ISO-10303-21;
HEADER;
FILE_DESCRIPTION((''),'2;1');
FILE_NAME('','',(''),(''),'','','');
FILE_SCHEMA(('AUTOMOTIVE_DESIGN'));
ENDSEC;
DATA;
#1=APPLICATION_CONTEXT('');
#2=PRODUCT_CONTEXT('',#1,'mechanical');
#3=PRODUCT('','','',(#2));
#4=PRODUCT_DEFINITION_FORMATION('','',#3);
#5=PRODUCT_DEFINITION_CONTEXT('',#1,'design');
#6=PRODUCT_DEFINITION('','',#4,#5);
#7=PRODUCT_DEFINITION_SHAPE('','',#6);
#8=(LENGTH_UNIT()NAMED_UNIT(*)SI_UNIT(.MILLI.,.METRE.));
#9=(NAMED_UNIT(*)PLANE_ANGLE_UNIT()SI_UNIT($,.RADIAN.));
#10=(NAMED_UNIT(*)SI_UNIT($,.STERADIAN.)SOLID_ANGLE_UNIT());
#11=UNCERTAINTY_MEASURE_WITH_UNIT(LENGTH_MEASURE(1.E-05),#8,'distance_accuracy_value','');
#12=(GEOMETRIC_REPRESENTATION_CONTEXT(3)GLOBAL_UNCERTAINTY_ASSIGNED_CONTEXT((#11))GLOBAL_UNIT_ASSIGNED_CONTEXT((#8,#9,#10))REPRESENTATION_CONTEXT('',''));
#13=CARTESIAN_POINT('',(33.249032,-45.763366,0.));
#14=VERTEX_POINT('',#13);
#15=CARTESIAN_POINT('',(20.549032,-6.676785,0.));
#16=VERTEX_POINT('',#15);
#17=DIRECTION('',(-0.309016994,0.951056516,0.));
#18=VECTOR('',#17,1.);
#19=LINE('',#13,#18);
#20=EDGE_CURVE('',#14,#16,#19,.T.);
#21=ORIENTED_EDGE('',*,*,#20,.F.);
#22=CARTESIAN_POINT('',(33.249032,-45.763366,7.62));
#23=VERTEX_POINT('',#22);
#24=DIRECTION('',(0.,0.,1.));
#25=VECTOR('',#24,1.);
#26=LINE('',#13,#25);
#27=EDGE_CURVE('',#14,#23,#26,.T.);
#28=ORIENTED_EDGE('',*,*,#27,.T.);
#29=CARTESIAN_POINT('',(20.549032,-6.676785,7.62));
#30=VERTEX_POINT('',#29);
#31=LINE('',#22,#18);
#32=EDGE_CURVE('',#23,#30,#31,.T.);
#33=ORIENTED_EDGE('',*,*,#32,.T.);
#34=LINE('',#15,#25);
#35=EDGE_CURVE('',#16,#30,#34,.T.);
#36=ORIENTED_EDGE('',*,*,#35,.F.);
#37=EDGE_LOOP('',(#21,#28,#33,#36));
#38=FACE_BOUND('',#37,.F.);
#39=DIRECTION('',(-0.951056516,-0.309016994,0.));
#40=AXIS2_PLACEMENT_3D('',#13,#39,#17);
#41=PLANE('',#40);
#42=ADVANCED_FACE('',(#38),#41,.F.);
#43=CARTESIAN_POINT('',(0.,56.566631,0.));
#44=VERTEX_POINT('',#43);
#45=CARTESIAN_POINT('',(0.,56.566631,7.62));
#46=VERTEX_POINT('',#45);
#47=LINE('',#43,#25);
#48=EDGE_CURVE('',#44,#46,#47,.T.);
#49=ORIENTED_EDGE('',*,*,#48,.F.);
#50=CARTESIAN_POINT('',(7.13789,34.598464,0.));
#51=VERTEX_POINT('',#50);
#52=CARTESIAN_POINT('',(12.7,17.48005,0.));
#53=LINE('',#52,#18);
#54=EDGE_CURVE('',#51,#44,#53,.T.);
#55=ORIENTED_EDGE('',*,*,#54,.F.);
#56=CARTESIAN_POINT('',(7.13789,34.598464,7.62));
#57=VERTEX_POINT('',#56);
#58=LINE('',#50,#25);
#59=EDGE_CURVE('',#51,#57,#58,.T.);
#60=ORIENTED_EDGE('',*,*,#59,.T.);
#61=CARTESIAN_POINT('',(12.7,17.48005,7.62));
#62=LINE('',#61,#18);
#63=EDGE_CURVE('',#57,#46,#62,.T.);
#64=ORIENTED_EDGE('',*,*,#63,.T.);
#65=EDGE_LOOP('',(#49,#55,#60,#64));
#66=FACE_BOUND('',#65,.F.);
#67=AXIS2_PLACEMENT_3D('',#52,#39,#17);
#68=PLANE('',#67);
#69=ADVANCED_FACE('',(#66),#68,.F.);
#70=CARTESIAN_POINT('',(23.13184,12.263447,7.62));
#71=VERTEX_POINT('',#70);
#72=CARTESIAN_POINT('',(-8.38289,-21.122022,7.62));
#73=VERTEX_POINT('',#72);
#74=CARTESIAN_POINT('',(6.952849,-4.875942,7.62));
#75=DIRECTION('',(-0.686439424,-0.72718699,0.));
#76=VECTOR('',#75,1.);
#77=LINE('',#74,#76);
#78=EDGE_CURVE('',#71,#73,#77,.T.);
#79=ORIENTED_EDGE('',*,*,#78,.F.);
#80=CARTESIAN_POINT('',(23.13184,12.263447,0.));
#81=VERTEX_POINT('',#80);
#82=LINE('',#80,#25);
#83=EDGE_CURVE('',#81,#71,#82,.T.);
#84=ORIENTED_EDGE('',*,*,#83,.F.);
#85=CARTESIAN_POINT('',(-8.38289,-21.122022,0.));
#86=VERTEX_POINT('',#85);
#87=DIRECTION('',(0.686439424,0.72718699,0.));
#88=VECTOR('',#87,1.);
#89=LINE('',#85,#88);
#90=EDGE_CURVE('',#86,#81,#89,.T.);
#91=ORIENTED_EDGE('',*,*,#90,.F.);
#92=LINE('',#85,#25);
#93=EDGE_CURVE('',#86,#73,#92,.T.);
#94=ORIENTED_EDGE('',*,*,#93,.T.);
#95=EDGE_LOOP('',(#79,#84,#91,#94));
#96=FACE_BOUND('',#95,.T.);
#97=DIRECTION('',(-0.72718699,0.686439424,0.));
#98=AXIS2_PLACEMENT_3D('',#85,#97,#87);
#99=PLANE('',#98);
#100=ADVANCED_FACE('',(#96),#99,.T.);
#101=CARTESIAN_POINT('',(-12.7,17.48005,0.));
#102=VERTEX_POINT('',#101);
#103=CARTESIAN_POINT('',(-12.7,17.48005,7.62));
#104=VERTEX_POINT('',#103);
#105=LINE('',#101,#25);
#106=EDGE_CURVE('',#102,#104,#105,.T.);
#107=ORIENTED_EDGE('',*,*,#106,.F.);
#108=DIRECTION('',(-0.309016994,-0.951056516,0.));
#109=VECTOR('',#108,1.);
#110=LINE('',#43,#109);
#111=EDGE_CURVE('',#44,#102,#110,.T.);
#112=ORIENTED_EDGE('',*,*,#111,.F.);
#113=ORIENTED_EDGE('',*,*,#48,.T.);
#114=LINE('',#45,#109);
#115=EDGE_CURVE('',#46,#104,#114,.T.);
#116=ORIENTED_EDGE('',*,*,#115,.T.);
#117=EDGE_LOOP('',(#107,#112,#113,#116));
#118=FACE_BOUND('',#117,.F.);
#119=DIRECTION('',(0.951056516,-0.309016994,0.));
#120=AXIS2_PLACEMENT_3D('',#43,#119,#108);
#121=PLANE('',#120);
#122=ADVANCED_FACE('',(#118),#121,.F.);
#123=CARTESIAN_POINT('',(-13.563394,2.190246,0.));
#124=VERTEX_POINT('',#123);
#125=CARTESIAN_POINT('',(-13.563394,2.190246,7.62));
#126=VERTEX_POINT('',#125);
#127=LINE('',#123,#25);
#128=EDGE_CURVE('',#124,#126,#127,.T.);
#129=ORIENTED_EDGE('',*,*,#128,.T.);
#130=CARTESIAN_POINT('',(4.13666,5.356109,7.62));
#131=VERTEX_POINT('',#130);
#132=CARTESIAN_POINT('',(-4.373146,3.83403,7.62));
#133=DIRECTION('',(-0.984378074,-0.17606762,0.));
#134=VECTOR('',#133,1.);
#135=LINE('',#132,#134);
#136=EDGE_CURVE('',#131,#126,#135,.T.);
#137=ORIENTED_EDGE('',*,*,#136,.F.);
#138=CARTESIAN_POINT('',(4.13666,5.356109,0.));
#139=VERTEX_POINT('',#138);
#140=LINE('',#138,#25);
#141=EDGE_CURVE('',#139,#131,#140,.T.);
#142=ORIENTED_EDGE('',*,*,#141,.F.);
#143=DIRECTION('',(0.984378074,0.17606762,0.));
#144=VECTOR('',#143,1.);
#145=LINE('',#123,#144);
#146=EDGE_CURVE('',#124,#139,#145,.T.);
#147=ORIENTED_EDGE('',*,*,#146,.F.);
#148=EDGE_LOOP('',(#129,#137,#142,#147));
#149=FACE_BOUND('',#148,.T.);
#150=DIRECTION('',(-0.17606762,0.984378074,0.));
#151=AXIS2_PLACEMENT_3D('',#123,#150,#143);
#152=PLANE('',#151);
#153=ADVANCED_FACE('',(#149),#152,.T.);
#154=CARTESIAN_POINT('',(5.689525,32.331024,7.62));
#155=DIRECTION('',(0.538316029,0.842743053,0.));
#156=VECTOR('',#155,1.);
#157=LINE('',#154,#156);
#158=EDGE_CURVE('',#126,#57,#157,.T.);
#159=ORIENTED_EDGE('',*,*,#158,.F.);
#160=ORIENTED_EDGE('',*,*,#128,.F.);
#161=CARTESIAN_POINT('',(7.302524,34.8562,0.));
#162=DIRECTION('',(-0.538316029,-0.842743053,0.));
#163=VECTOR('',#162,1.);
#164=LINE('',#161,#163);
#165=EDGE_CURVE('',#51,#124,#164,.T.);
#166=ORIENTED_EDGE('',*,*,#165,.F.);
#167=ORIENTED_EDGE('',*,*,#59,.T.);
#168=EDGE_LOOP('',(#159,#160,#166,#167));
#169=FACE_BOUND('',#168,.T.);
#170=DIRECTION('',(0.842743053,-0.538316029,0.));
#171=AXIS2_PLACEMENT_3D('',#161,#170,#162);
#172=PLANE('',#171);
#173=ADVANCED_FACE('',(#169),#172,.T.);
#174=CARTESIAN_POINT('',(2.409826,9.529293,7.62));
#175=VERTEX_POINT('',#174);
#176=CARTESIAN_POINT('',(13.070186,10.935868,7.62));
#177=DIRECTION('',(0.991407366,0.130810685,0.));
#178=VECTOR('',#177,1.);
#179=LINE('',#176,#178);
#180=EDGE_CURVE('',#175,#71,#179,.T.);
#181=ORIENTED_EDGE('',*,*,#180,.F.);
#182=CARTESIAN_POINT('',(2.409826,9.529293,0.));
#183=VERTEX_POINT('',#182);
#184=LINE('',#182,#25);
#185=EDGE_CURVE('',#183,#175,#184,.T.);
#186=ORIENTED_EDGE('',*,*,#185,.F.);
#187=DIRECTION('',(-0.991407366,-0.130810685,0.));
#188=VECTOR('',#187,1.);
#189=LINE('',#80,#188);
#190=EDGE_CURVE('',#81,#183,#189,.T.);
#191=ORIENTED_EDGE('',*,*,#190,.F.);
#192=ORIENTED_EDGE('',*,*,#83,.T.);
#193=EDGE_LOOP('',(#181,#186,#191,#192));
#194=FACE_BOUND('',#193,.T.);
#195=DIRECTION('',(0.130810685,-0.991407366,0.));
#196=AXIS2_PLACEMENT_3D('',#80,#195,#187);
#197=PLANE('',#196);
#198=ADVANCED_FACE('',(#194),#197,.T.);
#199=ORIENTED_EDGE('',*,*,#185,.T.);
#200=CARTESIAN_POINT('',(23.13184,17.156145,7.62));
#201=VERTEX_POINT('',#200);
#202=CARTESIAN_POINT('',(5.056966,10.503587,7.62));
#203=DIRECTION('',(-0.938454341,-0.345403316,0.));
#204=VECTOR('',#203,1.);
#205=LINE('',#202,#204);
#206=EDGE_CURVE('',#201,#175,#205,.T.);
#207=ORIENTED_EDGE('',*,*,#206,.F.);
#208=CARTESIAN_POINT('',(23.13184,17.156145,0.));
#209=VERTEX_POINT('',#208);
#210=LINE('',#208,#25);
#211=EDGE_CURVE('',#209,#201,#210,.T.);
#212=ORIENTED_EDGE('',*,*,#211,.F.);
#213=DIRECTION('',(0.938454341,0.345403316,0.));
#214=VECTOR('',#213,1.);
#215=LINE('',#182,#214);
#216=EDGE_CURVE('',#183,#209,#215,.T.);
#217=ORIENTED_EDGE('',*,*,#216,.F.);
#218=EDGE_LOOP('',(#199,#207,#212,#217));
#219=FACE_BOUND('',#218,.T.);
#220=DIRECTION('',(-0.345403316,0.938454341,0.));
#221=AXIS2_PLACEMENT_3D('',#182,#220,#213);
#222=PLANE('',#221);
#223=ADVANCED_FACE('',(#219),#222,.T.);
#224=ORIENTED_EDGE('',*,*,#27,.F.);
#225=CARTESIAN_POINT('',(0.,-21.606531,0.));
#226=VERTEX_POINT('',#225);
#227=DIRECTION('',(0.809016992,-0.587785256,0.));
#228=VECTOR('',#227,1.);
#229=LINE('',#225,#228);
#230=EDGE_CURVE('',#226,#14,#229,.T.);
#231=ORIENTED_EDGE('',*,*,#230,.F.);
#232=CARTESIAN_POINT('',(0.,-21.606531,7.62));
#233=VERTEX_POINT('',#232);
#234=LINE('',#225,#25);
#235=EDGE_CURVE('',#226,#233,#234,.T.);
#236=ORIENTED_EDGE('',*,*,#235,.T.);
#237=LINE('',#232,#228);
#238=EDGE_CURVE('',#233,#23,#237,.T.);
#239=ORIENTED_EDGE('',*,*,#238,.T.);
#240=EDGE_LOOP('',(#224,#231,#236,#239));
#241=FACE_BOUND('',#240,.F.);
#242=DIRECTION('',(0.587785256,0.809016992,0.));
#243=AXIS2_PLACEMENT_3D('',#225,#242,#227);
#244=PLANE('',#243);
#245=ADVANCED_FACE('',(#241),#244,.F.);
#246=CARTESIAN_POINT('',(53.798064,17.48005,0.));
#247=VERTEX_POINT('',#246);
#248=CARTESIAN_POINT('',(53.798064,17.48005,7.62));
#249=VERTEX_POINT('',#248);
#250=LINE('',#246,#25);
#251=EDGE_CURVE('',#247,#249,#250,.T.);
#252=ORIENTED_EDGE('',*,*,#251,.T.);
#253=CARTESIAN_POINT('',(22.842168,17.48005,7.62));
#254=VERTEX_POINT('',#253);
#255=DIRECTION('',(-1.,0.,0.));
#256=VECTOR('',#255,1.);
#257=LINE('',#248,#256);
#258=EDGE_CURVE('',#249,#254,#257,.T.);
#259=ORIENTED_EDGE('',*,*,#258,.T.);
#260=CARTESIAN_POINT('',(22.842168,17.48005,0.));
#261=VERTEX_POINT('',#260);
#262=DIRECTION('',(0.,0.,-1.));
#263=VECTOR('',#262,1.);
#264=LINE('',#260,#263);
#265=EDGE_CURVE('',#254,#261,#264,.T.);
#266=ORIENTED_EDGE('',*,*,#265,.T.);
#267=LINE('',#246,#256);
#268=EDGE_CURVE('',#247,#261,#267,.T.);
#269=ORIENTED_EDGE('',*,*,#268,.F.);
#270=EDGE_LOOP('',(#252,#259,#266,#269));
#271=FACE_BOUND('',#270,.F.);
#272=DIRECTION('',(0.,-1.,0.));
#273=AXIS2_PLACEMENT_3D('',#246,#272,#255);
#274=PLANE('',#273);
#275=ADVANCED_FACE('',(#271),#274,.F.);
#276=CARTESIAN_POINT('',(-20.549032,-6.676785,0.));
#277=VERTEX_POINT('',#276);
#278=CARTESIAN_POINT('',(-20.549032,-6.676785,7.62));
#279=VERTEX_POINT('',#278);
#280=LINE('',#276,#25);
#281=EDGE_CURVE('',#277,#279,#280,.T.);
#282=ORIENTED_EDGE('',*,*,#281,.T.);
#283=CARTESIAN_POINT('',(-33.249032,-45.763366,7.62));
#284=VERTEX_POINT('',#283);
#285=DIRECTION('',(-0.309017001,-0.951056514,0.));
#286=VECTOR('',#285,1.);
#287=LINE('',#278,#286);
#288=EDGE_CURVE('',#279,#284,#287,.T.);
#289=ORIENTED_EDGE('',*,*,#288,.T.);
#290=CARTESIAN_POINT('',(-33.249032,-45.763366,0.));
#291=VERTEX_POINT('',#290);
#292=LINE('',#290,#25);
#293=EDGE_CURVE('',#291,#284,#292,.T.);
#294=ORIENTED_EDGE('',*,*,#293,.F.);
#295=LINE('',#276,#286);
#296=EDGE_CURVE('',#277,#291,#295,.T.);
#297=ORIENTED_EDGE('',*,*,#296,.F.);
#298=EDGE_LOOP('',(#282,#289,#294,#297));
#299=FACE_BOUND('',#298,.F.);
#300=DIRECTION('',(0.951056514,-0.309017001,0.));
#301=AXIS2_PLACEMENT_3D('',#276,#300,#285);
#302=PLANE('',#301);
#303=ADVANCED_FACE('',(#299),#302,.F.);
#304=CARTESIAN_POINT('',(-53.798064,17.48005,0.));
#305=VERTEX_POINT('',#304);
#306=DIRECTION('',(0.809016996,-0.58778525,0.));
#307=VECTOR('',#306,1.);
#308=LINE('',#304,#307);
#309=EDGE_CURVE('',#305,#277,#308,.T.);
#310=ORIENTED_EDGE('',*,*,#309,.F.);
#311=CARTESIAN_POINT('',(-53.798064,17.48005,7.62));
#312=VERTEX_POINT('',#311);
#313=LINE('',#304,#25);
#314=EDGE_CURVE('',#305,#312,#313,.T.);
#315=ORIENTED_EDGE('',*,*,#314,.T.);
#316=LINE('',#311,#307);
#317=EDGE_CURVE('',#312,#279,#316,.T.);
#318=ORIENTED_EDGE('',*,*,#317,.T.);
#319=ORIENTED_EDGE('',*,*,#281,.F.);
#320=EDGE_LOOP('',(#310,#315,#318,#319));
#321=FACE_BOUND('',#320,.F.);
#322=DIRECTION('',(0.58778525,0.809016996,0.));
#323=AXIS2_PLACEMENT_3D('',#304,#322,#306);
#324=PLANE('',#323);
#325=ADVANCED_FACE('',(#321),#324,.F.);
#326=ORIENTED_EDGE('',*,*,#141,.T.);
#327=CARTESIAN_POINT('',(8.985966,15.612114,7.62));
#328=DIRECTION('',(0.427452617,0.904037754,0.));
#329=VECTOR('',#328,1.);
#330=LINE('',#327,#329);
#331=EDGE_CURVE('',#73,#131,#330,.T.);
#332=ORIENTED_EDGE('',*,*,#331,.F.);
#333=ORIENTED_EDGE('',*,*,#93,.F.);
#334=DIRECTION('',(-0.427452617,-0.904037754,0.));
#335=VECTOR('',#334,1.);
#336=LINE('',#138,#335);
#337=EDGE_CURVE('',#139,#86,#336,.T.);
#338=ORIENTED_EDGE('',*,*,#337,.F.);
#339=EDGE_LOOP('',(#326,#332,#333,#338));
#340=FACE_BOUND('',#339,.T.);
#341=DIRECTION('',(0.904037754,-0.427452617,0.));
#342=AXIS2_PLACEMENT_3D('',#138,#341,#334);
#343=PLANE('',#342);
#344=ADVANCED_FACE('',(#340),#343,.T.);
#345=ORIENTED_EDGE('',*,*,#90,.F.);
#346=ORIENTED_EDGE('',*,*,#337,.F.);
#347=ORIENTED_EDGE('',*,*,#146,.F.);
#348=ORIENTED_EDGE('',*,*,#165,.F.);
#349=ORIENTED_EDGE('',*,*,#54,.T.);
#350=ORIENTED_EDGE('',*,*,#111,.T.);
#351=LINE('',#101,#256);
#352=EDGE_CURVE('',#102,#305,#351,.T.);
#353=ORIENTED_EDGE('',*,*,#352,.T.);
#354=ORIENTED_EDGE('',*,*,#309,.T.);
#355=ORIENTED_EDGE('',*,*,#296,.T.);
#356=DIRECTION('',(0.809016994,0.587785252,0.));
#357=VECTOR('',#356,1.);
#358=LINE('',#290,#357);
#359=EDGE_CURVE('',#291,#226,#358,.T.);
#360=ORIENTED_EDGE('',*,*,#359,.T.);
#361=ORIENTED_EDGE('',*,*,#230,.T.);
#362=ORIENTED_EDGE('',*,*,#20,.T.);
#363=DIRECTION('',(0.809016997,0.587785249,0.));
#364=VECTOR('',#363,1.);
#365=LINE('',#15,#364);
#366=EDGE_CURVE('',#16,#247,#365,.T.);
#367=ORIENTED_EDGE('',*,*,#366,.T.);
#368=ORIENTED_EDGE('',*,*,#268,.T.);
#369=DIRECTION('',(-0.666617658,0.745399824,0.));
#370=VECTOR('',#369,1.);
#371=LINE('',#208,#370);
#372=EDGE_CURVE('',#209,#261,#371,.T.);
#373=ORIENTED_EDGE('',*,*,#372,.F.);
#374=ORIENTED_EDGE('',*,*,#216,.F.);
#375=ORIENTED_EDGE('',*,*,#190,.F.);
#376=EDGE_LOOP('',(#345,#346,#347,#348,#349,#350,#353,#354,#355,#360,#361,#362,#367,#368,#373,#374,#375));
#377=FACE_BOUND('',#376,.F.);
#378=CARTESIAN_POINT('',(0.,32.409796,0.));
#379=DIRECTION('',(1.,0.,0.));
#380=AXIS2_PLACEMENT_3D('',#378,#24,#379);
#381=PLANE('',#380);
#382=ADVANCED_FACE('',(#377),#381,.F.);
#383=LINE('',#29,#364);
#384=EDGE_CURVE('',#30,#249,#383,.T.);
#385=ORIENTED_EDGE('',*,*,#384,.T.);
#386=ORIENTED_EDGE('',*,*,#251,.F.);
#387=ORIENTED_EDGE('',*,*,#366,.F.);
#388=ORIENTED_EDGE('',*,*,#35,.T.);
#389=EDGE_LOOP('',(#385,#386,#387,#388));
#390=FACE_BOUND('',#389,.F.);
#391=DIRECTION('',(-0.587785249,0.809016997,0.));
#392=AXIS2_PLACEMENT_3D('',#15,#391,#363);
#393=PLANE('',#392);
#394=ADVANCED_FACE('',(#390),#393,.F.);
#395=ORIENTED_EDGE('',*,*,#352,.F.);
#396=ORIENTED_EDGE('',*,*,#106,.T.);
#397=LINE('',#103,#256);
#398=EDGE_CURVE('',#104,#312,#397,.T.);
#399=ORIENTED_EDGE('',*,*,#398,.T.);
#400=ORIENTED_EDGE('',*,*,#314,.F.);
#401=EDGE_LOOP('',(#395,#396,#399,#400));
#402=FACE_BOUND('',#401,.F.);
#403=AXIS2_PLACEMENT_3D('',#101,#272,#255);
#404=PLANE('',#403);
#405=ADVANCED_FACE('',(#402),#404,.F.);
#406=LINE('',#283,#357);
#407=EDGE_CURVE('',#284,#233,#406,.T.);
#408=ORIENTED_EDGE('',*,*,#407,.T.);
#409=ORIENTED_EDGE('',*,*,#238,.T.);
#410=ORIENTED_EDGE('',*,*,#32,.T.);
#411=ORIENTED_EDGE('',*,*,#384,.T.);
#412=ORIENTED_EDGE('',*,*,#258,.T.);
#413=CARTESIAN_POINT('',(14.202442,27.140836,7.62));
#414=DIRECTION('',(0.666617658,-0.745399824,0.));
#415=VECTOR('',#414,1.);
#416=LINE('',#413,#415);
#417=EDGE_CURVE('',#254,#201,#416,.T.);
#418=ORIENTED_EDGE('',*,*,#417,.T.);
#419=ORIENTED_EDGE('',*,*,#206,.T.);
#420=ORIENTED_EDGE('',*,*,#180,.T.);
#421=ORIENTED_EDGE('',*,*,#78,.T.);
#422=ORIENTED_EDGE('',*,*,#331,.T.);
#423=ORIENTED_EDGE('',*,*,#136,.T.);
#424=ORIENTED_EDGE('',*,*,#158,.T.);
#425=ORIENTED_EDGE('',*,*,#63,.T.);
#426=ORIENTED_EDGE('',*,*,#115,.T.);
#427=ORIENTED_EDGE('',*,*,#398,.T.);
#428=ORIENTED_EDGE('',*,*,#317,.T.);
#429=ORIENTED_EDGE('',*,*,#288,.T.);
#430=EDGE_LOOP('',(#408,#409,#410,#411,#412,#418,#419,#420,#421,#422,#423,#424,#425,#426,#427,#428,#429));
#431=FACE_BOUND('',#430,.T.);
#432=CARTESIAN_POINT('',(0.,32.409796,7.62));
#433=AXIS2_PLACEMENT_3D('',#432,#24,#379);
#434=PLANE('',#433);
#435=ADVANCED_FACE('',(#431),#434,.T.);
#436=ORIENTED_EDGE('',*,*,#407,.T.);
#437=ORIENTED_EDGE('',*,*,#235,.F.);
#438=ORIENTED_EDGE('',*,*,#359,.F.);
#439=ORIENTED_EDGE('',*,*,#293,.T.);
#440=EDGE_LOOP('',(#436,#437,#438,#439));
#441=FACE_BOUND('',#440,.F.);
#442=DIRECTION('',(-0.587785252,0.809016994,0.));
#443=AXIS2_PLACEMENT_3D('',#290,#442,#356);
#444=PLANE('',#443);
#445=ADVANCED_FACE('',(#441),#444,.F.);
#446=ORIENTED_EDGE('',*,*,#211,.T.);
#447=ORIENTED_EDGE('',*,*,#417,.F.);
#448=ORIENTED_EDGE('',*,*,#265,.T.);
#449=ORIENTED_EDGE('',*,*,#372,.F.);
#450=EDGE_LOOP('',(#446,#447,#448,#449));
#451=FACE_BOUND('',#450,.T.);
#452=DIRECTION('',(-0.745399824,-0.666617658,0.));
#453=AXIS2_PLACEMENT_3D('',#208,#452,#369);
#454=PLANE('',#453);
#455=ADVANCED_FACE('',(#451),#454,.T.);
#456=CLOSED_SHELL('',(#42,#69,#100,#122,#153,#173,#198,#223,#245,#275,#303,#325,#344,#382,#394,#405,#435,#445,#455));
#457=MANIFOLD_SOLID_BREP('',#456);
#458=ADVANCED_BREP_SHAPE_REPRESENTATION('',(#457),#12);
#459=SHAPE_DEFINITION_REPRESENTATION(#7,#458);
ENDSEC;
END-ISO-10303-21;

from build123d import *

# Parameters (mm, degrees)
F1_DEPTH = 7.62
F3_DEPTH = 25.4


# Not quite as in the source:
# - ends of sketch curves that miss each other by under 0.0002 mm in the source are joined


with BuildPart() as f1:
    # F0 (on Top) → F1 (new body)
    with BuildSketch(Plane.XY):
        Polygon((0, 56.5666313121), (-12.7, 17.48005039), (12.7, 17.48005039), align=None)
        Polygon((12.7, 17.48005039), (-12.7, 17.48005039), (-20.5490316571, -6.6767851239), (0, -21.6065305321), (20.5490316571, -6.6767851239), align=None)
        Polygon((-20.5490316571, -6.6767851239), (-12.7, 17.48005039), (-53.7980635454, 17.48005039), align=None)
        Polygon((53.7980636, 17.48005039), (12.7, 17.48005039), (20.5490316571, -6.6767851239), align=None)
        Polygon((0, -21.6065305321), (-20.5490316571, -6.6767851239), (-33.2490320312, -45.7633663178), align=None)
        Polygon((33.2490317454, -45.7633663178), (20.5490316571, -6.6767851239), (0, -21.6065305321), align=None)
    extrude(amount=F1_DEPTH)

    # F2 (on Top) → F3 (cut)
    with BuildSketch(Plane.XY):
        Polygon((23.131839931, 17.1561446041), (7.3025235906, 34.8562002182), (-13.5633936152, 2.1902460139), (4.1366601363, 5.3561092354), (-8.3828903735, -21.1220216006), (23.131839931, 12.2634470463), (2.4098258, 9.5292925835), align=None)
    extrude(amount=F3_DEPTH, mode=Mode.SUBTRACT)


solid = f1.part
